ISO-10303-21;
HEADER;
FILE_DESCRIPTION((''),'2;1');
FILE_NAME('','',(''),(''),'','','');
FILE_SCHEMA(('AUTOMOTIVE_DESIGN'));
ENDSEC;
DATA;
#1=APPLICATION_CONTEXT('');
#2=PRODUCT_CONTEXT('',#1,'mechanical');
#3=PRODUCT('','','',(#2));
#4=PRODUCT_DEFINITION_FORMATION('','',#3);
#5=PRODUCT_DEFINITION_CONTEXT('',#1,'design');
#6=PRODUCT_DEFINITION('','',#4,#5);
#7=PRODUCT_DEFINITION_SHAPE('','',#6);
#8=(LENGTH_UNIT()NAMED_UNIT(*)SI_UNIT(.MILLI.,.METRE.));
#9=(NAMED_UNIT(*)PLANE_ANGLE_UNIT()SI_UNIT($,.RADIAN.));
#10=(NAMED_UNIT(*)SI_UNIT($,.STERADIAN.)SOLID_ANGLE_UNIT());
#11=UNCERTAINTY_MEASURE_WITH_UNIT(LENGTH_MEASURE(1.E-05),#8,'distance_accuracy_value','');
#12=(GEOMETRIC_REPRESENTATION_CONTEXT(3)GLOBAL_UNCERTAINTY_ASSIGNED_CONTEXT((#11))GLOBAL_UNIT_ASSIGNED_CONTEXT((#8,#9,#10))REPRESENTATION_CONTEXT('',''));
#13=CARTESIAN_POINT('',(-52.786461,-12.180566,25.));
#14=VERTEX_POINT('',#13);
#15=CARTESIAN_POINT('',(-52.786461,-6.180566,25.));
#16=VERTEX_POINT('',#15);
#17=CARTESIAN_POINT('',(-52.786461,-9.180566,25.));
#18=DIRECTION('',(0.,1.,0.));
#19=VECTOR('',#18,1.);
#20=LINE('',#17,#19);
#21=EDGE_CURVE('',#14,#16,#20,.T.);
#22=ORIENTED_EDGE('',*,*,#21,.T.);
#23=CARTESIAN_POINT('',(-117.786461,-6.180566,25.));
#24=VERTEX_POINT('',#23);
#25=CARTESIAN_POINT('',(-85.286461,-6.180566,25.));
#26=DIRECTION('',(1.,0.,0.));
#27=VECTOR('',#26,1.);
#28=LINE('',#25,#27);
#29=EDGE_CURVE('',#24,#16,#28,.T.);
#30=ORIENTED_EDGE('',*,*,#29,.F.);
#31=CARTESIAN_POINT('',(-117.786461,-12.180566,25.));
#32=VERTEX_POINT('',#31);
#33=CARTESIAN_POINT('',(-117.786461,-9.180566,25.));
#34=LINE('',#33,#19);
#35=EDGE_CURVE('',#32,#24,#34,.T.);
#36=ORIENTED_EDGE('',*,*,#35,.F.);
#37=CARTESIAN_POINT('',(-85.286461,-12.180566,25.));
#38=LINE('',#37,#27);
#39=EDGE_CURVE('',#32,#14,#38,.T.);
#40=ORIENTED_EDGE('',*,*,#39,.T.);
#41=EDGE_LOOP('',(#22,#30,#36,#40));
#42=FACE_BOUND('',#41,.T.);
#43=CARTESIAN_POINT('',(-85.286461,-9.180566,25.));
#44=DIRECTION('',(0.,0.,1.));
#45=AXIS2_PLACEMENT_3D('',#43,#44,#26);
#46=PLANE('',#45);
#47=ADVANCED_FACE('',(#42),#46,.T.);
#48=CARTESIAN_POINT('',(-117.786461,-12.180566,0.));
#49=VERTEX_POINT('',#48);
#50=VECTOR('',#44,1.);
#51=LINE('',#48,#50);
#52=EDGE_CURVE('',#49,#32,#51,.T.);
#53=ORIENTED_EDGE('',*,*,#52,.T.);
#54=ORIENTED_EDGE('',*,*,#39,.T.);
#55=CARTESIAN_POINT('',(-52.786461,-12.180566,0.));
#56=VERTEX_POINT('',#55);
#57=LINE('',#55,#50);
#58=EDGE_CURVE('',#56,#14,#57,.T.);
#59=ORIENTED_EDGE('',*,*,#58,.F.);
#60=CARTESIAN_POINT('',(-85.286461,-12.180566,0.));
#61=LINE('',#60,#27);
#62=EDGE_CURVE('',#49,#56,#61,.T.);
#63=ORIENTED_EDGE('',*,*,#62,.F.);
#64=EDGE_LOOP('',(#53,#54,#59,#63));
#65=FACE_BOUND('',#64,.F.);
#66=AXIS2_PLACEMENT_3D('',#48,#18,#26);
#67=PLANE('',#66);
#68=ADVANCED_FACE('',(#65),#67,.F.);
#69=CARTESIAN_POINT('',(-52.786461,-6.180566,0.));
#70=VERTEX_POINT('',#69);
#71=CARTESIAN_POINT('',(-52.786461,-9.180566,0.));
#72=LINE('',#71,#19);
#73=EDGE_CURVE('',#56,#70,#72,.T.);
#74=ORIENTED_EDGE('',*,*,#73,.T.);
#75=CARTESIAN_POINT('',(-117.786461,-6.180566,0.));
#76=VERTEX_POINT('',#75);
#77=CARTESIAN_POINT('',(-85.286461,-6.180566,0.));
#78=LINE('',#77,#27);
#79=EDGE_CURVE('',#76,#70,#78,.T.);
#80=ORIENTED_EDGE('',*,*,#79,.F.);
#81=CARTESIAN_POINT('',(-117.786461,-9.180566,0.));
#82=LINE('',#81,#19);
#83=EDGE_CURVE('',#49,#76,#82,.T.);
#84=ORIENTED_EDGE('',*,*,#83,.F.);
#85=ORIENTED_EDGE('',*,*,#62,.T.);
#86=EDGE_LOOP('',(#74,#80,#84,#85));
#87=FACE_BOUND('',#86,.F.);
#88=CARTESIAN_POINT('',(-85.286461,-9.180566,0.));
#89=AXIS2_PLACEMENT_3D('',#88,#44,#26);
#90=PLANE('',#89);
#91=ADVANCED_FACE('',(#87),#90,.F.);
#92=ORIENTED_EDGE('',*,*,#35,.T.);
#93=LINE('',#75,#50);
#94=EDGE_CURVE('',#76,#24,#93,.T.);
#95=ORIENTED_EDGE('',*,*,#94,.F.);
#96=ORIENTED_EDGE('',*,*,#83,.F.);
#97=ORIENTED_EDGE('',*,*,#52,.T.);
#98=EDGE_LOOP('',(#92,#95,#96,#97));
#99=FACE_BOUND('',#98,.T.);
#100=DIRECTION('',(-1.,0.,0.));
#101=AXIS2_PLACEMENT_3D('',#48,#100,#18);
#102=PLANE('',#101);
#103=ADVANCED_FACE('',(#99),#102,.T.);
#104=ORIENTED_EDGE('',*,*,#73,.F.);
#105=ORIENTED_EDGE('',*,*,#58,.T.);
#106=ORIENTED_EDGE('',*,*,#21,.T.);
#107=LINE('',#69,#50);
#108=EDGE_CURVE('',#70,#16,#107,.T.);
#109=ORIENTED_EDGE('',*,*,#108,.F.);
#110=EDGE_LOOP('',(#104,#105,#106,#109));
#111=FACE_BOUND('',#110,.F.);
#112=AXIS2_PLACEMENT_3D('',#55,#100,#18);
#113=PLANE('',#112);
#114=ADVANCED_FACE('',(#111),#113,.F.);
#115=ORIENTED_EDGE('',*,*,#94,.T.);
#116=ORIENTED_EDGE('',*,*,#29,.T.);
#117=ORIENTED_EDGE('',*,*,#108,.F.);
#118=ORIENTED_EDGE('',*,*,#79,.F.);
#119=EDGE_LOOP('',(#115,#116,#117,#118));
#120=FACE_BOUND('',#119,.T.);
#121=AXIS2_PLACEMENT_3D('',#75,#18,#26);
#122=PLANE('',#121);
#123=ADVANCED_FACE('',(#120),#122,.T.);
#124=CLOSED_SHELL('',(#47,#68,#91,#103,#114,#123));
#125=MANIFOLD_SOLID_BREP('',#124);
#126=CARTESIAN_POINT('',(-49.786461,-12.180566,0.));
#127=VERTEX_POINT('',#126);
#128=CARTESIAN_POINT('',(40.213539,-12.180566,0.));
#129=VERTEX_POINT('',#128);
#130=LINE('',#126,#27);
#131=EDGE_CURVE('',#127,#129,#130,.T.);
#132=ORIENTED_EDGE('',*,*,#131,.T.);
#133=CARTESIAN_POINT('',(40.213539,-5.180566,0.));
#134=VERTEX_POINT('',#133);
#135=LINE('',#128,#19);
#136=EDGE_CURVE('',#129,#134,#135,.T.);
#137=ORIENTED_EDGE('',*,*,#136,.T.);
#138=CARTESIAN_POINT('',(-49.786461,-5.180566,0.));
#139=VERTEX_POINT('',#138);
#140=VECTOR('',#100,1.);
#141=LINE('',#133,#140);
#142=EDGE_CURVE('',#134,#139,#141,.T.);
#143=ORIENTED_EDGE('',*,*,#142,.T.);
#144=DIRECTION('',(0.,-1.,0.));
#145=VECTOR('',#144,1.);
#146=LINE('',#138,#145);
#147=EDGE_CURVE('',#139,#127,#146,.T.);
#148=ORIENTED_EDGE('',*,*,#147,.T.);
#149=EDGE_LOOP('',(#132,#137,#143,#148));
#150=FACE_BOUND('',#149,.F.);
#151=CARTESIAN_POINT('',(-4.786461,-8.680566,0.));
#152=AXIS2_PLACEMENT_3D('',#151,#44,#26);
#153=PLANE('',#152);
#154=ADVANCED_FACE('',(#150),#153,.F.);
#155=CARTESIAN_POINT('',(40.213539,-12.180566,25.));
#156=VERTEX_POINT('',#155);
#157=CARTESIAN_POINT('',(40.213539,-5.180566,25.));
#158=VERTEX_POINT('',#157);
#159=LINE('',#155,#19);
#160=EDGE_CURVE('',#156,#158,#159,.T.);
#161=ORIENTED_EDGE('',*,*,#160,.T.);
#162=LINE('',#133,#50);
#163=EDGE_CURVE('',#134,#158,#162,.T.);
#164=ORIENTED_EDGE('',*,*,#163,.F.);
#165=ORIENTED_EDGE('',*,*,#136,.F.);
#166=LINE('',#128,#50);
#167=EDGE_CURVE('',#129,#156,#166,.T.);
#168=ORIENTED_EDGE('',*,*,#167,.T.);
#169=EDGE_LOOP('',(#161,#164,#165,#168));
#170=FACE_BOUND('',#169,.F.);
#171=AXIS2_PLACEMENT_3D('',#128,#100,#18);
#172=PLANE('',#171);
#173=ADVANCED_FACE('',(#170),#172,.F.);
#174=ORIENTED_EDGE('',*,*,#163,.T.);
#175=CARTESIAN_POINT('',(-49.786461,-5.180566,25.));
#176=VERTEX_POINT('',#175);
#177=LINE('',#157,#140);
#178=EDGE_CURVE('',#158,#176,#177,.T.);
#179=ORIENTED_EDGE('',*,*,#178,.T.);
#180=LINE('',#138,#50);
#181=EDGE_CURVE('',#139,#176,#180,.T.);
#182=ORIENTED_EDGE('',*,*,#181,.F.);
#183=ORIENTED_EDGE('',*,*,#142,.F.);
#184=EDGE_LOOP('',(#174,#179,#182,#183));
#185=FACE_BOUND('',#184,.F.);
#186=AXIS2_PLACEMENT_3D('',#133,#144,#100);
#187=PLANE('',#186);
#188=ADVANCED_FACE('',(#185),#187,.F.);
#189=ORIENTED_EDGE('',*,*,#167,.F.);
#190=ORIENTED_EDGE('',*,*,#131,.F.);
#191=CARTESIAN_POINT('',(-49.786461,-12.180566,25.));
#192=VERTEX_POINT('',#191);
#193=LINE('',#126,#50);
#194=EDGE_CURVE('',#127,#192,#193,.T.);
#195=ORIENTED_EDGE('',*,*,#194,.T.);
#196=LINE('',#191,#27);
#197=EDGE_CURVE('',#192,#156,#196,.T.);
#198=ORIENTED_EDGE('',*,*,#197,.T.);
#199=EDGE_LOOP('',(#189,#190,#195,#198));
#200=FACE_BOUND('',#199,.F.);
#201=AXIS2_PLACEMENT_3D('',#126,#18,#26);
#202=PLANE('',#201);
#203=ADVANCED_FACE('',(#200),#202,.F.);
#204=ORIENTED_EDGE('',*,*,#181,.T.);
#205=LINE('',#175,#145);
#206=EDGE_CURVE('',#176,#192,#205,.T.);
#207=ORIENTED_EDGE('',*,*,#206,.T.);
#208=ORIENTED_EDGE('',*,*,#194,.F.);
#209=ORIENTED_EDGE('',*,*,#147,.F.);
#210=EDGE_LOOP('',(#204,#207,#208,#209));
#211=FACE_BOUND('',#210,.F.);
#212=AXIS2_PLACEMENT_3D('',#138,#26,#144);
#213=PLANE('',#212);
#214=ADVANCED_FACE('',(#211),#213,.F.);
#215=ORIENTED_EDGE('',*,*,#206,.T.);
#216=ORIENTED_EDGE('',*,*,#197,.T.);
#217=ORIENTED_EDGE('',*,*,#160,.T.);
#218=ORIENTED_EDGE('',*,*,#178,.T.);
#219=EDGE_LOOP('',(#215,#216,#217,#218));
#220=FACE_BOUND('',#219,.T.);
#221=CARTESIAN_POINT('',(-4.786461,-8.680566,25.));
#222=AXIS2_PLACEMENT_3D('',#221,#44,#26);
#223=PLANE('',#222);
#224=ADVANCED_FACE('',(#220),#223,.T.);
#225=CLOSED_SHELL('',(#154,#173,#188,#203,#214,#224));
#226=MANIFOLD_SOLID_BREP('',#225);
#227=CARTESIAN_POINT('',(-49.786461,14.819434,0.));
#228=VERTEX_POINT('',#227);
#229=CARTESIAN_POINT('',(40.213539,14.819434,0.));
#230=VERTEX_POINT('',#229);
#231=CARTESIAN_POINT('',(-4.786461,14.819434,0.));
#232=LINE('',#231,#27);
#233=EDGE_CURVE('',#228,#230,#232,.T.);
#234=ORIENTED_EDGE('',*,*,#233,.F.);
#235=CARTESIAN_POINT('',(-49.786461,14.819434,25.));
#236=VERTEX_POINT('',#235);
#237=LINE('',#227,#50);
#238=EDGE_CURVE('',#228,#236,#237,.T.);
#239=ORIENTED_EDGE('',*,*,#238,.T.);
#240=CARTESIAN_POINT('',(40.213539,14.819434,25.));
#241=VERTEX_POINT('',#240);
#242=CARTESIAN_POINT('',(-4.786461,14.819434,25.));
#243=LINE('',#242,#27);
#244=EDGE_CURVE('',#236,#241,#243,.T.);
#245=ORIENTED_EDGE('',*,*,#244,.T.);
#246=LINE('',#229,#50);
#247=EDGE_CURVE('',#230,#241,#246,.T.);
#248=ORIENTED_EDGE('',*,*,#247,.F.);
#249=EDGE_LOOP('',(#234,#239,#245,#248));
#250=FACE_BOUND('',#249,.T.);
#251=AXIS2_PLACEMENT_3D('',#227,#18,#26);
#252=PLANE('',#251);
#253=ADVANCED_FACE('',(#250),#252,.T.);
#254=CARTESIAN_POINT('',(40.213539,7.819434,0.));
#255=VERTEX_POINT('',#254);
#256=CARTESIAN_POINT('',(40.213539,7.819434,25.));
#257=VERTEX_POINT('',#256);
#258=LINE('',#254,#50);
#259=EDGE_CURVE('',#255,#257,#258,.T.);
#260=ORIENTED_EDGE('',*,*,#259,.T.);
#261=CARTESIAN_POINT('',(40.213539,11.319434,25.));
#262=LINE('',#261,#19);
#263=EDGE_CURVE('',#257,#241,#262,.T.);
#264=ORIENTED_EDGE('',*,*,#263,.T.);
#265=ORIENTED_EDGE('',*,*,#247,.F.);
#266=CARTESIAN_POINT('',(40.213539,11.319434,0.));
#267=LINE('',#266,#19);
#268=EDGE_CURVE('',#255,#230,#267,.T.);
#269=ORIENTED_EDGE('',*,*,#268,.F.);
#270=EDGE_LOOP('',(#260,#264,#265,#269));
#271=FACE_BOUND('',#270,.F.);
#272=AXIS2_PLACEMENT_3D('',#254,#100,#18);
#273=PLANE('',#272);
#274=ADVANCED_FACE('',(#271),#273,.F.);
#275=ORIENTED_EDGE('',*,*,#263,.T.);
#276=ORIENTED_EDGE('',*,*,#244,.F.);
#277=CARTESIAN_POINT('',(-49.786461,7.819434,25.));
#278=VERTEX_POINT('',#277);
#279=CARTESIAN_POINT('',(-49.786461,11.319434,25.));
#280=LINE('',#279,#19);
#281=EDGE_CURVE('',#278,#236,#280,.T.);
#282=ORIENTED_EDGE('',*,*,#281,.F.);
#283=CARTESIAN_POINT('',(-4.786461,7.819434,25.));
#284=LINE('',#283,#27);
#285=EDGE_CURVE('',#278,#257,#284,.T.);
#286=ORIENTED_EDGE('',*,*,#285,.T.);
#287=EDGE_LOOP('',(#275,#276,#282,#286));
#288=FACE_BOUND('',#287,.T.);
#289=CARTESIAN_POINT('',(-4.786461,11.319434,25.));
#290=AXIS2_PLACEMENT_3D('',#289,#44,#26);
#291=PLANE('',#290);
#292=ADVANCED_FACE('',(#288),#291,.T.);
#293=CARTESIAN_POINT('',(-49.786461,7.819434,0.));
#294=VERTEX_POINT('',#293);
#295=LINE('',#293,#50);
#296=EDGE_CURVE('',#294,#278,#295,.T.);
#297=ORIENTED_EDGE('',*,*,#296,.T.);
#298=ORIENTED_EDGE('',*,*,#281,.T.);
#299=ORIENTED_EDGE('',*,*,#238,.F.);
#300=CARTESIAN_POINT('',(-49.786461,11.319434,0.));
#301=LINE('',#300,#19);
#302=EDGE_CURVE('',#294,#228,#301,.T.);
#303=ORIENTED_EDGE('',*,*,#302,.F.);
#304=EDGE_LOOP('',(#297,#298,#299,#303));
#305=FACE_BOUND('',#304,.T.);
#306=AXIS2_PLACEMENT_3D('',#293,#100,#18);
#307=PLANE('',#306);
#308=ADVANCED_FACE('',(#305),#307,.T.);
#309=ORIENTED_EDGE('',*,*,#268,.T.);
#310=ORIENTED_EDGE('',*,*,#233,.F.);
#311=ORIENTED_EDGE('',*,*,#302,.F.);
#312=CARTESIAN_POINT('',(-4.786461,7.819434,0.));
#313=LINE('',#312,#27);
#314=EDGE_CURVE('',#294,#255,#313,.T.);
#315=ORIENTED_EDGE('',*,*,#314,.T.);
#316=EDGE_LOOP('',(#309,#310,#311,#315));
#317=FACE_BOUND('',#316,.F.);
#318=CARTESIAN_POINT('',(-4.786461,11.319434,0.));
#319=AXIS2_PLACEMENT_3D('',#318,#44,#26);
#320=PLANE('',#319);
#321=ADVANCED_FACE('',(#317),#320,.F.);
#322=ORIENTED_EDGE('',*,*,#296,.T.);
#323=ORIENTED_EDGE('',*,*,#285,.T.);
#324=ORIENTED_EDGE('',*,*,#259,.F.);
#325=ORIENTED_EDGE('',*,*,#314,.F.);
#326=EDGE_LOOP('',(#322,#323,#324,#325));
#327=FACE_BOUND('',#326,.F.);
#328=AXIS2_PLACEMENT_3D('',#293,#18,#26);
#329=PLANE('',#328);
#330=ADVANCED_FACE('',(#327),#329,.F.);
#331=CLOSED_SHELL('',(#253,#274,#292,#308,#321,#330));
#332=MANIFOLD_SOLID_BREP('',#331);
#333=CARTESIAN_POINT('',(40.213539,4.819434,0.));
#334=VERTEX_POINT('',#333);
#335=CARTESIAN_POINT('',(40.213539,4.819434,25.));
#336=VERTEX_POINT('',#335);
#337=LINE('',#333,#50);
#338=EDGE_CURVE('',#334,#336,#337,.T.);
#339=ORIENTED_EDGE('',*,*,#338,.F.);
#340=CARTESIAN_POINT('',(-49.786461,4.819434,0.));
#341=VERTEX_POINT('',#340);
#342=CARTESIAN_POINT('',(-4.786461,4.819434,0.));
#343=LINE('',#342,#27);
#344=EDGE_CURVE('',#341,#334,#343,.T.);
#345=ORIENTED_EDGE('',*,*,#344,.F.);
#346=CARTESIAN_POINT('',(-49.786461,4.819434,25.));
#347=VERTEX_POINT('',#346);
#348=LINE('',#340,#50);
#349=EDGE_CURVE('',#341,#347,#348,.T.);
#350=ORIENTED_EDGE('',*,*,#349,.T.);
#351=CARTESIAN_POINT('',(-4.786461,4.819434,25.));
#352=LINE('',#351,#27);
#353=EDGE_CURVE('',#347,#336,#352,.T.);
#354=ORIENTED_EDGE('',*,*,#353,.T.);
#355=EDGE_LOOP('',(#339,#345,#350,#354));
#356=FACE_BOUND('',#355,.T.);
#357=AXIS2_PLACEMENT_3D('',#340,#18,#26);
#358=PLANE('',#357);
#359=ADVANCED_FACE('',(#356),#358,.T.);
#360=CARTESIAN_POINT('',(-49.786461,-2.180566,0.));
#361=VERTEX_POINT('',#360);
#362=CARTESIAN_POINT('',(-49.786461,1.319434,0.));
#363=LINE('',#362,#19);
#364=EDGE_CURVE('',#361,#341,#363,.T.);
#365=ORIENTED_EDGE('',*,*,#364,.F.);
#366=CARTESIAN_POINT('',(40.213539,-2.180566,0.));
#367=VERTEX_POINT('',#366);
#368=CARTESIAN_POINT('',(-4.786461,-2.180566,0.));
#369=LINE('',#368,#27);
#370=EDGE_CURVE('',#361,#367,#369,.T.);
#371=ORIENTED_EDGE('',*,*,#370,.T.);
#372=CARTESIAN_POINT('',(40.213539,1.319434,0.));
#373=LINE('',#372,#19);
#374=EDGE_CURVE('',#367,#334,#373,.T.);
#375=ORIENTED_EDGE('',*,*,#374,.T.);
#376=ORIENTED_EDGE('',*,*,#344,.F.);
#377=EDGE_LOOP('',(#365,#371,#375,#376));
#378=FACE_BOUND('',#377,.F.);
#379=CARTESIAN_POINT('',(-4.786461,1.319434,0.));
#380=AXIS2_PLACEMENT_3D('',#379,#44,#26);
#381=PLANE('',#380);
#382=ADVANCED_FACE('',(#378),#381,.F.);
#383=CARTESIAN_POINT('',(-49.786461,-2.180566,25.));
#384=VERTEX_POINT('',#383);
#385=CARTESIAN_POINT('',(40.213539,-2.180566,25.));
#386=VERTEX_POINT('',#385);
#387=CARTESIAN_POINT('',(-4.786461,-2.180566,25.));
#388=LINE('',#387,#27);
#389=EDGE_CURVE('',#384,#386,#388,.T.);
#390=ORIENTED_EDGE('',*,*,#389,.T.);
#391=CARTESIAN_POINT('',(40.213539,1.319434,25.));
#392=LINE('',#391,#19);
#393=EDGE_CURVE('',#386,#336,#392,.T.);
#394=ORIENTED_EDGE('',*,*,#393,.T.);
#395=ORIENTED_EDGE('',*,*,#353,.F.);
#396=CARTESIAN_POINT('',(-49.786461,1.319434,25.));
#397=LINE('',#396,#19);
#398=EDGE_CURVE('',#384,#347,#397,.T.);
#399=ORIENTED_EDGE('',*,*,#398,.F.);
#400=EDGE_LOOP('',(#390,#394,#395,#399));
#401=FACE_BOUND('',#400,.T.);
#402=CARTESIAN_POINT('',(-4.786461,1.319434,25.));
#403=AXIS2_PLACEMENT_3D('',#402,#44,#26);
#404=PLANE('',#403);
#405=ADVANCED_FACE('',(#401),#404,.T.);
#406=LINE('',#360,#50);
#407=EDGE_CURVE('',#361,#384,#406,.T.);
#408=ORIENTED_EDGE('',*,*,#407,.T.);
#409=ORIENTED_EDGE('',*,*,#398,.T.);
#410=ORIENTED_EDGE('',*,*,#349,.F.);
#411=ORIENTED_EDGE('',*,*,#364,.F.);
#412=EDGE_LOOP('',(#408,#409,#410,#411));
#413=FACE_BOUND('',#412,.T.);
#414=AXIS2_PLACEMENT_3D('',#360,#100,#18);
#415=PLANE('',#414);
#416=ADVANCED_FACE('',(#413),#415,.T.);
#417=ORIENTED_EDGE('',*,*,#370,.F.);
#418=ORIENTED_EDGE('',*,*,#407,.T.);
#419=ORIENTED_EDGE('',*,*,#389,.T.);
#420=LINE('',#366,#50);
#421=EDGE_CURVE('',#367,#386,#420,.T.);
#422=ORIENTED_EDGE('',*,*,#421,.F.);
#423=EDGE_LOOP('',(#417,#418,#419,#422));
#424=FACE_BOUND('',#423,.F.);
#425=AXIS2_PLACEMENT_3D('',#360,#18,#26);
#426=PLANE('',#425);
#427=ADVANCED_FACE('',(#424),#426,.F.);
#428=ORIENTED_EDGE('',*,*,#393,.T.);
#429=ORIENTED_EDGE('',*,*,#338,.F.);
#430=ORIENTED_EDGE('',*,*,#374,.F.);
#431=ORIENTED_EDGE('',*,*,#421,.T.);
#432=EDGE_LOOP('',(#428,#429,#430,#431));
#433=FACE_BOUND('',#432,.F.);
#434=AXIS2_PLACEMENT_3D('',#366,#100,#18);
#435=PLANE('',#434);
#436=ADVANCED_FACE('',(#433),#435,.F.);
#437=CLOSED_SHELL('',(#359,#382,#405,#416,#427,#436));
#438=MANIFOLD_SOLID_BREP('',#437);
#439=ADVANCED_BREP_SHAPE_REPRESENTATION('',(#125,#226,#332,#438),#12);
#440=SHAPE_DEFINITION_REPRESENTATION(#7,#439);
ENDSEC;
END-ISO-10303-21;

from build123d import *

# Parameters (mm, degrees)
F0_W     = 90
F0_H     = 7
F1_DEPTH = 25
F0_W_2   = 65
F0_H_2   = 6
F2_DEPTH = 25


# Not quite as in the source:
# - a feature names something its author has since deleted; it is built from what else it names


with BuildPart() as f1:
    # F0 (on Top) → F1 (new body)
    with BuildSketch(Plane.XY):
        with Locations((-4.7864606604, 1.3194340005)):
            Rectangle(F0_W, F0_H)
    extrude(amount=F1_DEPTH)


with BuildPart() as f1b:
    # F0 (on Top) → F1, piece 2 (new body)
    with BuildSketch(Plane.XY):
        Polygon((40.2135393396, -5.1805659995), (-49.7864606604, -5.1805659995), (-49.7864606604, -12.1805659995), (15.2135393396, -12.1805659995), (40.2135393396, -12.1805659995), align=None)
    extrude(amount=F1_DEPTH)

    # F0 (on Top) → F2, piece 2 (join)
    with BuildSketch(Plane.XY):
        Polygon((40.2135393396, -5.1805659995), (-49.7864606604, -5.1805659995), (-49.7864606604, -12.1805659995), (15.2135393396, -12.1805659995), (40.2135393396, -12.1805659995), align=None)
    extrude(amount=F2_DEPTH)


with BuildPart() as f1c:
    # F0 (on Top) → F1, piece 3 (new body)
    with BuildSketch(Plane.XY):
        with Locations((-85.2864606604, -9.1805659995)):
            Rectangle(F0_W_2, F0_H_2)
    extrude(amount=F1_DEPTH)


with BuildPart() as f2:
    # F0 (on Top) → F2 (new body)
    with BuildSketch(Plane.XY):
        with Locations((-4.7864606604, 11.3194340005)):
            Rectangle(F0_W, F0_H)
    extrude(amount=F2_DEPTH)


solid = Compound([f1.part, f1b.part, f1c.part, f2.part])
